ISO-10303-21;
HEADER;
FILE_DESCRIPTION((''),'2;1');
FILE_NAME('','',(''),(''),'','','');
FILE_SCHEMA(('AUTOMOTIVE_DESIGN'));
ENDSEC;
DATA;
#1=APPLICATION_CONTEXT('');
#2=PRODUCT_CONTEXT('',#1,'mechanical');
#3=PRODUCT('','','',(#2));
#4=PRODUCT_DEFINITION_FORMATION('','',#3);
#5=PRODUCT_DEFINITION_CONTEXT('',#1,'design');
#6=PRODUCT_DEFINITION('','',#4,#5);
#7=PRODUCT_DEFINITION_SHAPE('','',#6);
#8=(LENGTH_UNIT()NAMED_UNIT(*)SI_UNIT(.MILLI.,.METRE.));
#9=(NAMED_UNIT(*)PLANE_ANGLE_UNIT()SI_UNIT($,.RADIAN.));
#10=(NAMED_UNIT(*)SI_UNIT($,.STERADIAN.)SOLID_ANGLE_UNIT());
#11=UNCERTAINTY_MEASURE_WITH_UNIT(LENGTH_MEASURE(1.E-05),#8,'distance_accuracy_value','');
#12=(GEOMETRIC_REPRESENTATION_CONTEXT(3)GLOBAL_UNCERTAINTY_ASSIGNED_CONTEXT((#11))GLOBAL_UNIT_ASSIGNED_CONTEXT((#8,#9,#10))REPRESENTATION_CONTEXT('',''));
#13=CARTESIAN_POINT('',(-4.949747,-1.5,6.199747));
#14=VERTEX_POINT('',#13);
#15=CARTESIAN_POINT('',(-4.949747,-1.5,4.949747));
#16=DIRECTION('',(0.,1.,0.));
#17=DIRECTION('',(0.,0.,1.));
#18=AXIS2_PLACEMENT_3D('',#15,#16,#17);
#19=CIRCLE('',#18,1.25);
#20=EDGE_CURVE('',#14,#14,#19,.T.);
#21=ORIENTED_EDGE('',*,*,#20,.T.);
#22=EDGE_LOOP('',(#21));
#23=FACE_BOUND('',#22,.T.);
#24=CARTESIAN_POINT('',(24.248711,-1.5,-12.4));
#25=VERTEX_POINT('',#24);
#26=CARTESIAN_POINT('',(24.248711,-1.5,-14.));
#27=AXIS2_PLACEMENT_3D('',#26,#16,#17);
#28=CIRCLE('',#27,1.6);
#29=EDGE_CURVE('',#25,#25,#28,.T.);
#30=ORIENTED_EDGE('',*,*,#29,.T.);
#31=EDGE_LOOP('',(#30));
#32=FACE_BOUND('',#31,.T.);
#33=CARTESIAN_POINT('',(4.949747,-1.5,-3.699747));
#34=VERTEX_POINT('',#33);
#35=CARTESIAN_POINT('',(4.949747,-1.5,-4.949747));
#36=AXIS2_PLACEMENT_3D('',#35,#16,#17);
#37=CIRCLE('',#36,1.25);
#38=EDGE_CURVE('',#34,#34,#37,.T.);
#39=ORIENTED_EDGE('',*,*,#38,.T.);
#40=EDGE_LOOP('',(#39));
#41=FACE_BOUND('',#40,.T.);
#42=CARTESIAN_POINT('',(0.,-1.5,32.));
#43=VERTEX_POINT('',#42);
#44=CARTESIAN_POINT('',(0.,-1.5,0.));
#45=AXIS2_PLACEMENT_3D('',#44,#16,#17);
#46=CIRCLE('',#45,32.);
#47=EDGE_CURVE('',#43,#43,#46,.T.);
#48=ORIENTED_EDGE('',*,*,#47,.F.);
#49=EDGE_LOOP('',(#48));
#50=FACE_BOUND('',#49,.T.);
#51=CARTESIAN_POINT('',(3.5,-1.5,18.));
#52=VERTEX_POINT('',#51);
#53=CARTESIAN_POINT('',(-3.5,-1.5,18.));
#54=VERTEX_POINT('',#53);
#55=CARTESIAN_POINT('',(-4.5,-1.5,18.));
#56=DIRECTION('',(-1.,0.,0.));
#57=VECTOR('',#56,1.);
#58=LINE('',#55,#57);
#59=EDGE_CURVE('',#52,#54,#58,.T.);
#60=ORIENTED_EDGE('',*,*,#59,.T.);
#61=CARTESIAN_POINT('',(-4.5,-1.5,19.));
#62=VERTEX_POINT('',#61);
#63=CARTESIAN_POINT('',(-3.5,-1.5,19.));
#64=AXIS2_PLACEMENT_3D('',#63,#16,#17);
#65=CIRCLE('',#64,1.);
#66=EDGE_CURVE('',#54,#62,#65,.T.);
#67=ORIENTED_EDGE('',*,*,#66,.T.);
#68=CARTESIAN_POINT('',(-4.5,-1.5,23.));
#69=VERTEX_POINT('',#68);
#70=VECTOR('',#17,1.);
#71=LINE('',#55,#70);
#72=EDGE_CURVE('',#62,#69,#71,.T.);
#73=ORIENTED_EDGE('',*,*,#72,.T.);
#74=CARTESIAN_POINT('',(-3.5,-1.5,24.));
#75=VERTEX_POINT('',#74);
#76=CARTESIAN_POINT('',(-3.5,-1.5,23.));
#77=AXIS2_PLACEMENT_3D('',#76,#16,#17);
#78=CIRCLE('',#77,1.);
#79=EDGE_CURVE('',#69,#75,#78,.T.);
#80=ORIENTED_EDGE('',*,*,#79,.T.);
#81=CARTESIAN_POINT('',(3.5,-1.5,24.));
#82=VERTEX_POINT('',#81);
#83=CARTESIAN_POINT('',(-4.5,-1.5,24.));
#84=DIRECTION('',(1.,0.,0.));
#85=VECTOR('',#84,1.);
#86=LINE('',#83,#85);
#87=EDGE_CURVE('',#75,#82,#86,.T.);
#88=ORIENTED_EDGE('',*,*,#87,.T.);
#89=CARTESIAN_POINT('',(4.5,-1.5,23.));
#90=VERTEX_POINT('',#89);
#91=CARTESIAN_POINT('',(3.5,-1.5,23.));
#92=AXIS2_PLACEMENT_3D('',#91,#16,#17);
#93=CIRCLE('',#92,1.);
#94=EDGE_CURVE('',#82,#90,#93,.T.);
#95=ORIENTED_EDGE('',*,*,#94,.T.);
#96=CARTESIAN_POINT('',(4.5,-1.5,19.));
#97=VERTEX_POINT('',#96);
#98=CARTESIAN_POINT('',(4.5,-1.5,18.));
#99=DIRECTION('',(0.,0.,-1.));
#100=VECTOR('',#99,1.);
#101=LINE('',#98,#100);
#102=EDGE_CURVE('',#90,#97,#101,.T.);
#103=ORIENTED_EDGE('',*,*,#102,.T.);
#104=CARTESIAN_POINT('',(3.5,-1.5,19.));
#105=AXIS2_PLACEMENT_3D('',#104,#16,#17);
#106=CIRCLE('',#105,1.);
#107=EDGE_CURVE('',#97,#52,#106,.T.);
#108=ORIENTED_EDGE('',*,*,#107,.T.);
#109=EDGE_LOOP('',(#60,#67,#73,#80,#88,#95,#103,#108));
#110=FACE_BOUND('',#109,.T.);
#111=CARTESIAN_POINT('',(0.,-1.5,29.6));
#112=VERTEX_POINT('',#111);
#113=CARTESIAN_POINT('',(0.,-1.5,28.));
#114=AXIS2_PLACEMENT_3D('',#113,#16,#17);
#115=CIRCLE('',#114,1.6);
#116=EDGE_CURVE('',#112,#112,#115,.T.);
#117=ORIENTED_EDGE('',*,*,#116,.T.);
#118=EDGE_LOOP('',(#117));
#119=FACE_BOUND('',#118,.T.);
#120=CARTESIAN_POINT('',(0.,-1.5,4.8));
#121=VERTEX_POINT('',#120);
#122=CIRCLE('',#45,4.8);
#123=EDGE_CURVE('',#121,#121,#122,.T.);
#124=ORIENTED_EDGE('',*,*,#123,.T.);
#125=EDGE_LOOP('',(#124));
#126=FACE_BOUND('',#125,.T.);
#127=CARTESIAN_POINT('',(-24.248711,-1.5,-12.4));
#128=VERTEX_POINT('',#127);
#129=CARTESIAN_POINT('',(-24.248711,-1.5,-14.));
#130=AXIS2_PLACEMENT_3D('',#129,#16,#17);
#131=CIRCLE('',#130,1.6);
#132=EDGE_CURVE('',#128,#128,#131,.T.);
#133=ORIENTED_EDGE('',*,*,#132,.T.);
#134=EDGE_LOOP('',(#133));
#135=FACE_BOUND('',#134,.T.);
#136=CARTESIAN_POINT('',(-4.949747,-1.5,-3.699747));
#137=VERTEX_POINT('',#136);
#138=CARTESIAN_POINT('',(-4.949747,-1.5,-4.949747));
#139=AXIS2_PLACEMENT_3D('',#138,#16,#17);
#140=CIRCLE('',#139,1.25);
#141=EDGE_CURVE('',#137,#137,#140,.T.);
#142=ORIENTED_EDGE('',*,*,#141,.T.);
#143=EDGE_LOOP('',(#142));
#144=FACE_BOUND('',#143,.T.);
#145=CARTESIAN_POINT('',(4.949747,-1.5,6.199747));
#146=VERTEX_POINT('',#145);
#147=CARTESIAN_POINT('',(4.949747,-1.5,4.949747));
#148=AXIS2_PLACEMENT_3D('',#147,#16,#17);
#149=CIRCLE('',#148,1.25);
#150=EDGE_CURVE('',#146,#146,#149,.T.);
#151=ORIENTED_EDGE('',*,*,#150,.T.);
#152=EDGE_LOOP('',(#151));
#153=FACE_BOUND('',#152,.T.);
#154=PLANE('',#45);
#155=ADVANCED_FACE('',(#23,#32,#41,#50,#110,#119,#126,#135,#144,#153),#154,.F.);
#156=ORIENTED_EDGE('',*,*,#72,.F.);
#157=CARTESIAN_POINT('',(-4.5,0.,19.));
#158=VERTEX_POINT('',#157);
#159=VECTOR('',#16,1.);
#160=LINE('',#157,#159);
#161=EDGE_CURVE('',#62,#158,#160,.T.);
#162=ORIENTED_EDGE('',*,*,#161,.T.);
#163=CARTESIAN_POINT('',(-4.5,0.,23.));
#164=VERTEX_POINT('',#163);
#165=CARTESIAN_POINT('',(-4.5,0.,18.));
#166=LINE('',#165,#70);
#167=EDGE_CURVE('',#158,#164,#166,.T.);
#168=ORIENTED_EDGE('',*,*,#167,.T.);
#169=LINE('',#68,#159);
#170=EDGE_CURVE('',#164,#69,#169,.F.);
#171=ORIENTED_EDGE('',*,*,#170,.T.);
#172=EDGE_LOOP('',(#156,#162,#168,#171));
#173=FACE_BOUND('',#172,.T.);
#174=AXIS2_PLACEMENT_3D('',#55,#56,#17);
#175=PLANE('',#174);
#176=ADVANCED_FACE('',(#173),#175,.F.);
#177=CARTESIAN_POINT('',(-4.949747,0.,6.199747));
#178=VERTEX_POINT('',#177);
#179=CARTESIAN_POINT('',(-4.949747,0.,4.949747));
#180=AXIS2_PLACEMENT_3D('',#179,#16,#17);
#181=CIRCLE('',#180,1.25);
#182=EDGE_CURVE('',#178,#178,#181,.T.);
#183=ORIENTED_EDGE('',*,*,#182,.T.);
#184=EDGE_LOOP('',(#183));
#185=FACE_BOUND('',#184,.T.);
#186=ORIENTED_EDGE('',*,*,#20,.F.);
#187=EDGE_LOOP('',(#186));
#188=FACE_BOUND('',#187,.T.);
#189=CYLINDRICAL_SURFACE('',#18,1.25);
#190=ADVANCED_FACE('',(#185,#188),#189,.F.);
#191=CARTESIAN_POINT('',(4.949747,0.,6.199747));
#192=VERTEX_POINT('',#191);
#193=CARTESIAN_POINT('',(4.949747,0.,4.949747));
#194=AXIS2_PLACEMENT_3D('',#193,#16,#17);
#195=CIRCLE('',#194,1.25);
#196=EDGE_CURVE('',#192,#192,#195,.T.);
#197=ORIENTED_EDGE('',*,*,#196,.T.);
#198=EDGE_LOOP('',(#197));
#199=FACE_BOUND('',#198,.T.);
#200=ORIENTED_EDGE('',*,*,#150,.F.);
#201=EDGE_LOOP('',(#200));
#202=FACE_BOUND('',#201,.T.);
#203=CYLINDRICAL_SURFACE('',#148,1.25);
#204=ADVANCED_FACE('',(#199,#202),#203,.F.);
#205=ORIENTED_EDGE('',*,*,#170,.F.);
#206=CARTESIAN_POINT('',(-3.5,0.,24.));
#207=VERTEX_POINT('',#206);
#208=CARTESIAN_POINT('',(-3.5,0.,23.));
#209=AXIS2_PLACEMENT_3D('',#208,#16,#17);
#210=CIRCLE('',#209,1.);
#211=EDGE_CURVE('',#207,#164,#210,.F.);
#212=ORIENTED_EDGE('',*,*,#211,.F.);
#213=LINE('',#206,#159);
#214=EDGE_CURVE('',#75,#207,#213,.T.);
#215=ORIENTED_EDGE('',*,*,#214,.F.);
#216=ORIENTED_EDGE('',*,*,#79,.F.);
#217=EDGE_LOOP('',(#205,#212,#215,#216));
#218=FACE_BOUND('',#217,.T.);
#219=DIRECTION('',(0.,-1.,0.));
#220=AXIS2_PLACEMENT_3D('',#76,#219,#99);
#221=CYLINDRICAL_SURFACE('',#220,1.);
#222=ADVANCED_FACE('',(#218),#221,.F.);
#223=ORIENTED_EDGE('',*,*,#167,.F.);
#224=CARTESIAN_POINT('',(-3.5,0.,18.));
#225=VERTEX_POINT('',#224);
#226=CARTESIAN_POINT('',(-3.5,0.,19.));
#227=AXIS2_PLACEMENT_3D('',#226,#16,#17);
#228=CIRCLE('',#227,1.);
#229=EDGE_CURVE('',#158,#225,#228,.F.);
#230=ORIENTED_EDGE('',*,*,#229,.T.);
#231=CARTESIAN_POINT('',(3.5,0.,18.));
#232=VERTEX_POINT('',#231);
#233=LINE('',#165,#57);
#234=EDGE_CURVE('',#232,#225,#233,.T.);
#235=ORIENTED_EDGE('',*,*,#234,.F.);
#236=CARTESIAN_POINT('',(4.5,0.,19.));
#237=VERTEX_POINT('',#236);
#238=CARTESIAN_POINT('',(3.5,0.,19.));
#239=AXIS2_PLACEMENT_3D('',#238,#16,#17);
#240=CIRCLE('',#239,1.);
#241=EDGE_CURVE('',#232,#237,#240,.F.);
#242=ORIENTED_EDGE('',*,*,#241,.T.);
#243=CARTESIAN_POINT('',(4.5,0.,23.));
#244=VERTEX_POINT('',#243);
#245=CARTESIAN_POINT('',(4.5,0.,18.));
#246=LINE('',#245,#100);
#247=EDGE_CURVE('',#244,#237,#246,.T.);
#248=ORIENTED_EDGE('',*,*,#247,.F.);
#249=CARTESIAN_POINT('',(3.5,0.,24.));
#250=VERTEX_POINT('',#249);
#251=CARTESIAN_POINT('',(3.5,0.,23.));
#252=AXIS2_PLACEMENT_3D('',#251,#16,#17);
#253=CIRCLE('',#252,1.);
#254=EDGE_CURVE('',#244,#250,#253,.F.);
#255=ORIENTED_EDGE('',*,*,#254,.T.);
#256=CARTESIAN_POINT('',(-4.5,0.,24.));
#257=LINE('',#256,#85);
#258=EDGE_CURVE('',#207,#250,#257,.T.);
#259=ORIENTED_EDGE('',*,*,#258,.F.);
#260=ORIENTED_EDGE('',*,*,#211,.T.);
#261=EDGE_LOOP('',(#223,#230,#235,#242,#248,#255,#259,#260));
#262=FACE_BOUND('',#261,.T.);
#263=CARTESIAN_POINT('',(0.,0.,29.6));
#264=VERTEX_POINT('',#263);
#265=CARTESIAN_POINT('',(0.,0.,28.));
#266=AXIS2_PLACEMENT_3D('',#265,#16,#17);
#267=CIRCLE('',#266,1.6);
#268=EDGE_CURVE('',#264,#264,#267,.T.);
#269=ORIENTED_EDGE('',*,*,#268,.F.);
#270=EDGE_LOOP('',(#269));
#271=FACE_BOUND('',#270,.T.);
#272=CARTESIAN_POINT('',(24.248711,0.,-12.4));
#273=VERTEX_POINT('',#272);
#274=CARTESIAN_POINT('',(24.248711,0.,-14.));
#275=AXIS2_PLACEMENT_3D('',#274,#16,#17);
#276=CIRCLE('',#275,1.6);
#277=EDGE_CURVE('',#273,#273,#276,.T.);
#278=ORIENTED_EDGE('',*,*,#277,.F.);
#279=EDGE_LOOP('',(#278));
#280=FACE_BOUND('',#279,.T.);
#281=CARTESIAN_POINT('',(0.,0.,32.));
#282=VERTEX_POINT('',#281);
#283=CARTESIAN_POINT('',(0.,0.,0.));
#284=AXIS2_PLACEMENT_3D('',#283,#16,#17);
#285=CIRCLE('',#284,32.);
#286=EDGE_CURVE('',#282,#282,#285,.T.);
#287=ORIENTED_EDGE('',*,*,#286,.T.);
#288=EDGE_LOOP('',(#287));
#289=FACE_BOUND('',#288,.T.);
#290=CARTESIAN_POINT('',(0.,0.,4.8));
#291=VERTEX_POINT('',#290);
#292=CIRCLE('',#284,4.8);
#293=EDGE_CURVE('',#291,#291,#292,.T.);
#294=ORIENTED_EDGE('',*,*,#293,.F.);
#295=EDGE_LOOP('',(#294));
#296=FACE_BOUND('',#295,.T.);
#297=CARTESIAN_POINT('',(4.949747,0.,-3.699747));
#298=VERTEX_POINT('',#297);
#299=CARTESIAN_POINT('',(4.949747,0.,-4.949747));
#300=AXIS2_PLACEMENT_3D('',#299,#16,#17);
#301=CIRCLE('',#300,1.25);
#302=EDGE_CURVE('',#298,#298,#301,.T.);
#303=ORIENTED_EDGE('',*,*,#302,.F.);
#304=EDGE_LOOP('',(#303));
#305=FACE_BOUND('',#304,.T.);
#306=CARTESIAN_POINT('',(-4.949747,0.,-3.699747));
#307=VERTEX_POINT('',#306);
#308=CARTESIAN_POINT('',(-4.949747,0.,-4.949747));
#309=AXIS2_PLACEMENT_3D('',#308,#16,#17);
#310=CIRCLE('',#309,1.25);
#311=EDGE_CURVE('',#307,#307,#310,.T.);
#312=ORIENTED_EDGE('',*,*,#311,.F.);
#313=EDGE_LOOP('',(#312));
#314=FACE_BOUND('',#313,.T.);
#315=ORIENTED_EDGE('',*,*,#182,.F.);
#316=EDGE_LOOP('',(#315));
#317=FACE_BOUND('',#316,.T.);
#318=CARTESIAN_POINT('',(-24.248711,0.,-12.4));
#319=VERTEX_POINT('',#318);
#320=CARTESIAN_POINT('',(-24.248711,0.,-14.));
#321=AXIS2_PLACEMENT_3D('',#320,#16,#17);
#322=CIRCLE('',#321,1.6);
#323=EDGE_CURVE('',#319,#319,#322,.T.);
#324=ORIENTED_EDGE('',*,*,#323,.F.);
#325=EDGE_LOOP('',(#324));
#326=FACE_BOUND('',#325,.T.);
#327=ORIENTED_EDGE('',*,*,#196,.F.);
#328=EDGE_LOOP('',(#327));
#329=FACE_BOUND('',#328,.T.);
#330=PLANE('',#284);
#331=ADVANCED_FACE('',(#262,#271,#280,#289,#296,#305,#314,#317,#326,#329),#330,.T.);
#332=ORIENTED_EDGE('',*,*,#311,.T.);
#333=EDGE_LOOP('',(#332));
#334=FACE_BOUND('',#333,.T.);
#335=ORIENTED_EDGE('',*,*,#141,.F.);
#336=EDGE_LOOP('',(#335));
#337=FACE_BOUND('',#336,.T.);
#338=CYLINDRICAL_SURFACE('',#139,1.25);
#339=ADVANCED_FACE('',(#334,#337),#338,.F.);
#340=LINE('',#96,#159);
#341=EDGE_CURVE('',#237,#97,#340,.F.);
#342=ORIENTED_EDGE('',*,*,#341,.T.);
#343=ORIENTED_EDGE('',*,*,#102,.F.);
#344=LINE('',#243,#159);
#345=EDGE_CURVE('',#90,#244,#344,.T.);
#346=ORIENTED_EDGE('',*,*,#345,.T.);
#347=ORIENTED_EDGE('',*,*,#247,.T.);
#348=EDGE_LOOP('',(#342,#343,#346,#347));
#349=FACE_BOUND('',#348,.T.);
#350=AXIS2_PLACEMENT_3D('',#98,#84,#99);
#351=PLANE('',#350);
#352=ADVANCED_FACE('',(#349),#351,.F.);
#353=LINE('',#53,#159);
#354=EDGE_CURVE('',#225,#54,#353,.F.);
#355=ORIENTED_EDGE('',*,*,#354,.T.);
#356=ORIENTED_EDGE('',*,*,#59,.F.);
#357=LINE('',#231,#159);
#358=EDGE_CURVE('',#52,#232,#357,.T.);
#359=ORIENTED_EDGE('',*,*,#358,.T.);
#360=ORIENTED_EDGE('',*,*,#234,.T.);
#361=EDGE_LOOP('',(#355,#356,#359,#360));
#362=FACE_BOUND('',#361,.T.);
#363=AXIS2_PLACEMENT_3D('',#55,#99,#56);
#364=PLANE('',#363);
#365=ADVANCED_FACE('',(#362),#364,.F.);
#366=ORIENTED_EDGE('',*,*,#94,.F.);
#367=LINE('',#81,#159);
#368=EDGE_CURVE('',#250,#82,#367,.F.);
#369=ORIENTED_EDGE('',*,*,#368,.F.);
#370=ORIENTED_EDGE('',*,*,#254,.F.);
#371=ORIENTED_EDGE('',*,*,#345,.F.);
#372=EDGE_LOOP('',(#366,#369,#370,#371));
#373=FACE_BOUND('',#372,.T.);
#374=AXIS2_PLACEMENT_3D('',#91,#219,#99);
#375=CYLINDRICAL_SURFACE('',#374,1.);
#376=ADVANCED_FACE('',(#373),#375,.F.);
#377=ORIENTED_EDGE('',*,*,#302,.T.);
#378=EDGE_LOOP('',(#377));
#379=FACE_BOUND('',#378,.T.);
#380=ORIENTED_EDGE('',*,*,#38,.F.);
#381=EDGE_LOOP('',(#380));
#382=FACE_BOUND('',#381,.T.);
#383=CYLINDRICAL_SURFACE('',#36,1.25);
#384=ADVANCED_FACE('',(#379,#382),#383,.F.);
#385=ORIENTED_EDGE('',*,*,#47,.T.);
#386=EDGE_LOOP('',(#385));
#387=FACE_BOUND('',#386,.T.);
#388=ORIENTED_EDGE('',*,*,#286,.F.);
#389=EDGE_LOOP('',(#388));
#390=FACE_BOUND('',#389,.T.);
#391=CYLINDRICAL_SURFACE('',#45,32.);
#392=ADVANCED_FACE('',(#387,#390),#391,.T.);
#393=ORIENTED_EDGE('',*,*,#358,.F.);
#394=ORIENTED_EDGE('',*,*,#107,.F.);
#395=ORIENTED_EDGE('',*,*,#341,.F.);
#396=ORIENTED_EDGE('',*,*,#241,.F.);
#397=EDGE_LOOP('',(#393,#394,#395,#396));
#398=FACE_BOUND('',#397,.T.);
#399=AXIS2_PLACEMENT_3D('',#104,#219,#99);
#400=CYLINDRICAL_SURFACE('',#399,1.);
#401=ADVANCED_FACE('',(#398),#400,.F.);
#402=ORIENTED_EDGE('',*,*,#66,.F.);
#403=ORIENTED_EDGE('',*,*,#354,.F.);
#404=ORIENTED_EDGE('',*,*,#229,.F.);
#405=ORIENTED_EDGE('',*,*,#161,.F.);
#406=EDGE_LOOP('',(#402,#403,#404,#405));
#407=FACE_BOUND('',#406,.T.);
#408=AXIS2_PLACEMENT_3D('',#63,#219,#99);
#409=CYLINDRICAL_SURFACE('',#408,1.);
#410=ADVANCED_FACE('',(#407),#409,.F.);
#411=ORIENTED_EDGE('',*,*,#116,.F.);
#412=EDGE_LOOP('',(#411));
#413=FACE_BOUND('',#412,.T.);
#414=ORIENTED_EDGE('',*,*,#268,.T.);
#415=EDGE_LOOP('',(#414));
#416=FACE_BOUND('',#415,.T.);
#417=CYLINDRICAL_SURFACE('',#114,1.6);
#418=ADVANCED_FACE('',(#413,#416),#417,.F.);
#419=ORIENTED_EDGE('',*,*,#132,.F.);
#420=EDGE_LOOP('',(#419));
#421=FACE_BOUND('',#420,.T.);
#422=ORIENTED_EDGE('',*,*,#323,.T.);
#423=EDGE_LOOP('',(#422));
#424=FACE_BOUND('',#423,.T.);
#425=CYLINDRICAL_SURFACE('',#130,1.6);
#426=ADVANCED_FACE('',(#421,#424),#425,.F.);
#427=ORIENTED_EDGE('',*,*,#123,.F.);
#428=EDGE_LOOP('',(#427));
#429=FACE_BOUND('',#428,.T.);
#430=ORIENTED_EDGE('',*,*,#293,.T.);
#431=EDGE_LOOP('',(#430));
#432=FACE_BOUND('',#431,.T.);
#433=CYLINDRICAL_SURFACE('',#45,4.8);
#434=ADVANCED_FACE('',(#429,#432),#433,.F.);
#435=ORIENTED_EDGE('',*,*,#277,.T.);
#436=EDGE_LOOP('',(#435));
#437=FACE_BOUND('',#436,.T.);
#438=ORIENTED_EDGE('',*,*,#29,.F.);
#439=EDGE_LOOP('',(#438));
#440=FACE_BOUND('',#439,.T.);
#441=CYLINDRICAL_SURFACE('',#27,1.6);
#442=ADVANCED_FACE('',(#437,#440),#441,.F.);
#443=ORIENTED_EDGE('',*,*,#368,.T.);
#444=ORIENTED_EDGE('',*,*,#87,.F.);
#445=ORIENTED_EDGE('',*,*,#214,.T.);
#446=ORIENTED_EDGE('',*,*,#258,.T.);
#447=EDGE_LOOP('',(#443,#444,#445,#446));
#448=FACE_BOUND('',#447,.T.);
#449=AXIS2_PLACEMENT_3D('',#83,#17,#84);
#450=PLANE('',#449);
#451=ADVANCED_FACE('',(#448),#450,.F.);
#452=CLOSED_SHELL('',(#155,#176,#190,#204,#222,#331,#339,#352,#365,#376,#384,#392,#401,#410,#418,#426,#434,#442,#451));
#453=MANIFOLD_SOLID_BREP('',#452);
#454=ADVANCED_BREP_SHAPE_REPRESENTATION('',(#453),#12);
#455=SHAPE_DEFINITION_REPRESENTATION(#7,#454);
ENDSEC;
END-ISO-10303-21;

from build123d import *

# Parameters (mm, degrees)
SKETCH1_R          = 32
BASE_FLANGE1_DEPTH = 1.5
SKETCH6_R          = 1.6
CUT_EXTRUDE1_DEPTH = 46.279686395
SKETCH7_R          = 4.8
SKETCH7_R_2        = 1.25
CUT_EXTRUDE2_DEPTH = 46.279686395
SKETCH9_W          = 9
SKETCH9_H          = 6
CUT_EXTRUDE3_DEPTH = 46.279686395
FILLET1_R          = 1


# Sheet-metal steps are written as plain solids
with BuildPart() as part:
    # Sketch1 → Base-Flange1 (new body)
    with BuildSketch(Plane(origin=(0, 0, 0), x_dir=(1, 0, 0), z_dir=(0, 1, 0))):
        with Locations(Location((0, 0, 0), (0, 0, 270))):
            Circle(SKETCH1_R)
    extrude(amount=-BASE_FLANGE1_DEPTH)

    # Sketch6 → Cut-Extrude1 (cut, through all)
    with BuildSketch(Plane(origin=(0, 0, 0), x_dir=(1, 0, 0), z_dir=(0, 1, 0))):
        with Locations(Location((0, -28, 0), (0, 0, 270))):
            Circle(SKETCH6_R)
        with Locations(Location((-24.248711306, 14, 0), (0, 0, 270))):
            Circle(SKETCH6_R)
        with Locations(Location((24.248711306, 14, 0), (0, 0, 270))):
            Circle(SKETCH6_R)
    extrude(amount=-CUT_EXTRUDE1_DEPTH, mode=Mode.SUBTRACT)

    # Sketch7 → Cut-Extrude2 (cut, through all)
    with BuildSketch(Plane(origin=(0, 0, 0), x_dir=(1, 0, 0), z_dir=(0, 1, 0))):
        with Locations(Location((0, 0, 0), (0, 0, 270))):
            Circle(SKETCH7_R)
        with Locations(Location((-4.949747468, 4.949747468, 0), (0, 0, 270))):
            Circle(SKETCH7_R_2)
        with Locations(Location((4.949747468, 4.949747468, 0), (0, 0, 270))):
            Circle(SKETCH7_R_2)
        with Locations(Location((4.949747468, -4.949747468, 0), (0, 0, 270))):
            Circle(SKETCH7_R_2)
        with Locations(Location((-4.949747468, -4.949747468, 0), (0, 0, 270))):
            Circle(SKETCH7_R_2)
    extrude(amount=-CUT_EXTRUDE2_DEPTH, mode=Mode.SUBTRACT)

    # Sketch9 → Cut-Extrude3 (cut, through all)
    with BuildSketch(Plane(origin=(0, 0, 0), x_dir=(1, 0, 0), z_dir=(0, 1, 0))):
        with Locations((0, -21)):
            Rectangle(SKETCH9_W, SKETCH9_H)
    extrude(amount=-CUT_EXTRUDE3_DEPTH, mode=Mode.SUBTRACT)

    # Fillet1
    fillet1_edges = [part.edges().sort_by_distance(p)[0] for p in [
        (-4.5, -0.75, 24),
        (-4.5, -0.75, 18),
        (4.5, -0.75, 18),
        (4.5, -0.75, 24),
    ]]
    fillet(fillet1_edges, radius=FILLET1_R)


solid = part.part
